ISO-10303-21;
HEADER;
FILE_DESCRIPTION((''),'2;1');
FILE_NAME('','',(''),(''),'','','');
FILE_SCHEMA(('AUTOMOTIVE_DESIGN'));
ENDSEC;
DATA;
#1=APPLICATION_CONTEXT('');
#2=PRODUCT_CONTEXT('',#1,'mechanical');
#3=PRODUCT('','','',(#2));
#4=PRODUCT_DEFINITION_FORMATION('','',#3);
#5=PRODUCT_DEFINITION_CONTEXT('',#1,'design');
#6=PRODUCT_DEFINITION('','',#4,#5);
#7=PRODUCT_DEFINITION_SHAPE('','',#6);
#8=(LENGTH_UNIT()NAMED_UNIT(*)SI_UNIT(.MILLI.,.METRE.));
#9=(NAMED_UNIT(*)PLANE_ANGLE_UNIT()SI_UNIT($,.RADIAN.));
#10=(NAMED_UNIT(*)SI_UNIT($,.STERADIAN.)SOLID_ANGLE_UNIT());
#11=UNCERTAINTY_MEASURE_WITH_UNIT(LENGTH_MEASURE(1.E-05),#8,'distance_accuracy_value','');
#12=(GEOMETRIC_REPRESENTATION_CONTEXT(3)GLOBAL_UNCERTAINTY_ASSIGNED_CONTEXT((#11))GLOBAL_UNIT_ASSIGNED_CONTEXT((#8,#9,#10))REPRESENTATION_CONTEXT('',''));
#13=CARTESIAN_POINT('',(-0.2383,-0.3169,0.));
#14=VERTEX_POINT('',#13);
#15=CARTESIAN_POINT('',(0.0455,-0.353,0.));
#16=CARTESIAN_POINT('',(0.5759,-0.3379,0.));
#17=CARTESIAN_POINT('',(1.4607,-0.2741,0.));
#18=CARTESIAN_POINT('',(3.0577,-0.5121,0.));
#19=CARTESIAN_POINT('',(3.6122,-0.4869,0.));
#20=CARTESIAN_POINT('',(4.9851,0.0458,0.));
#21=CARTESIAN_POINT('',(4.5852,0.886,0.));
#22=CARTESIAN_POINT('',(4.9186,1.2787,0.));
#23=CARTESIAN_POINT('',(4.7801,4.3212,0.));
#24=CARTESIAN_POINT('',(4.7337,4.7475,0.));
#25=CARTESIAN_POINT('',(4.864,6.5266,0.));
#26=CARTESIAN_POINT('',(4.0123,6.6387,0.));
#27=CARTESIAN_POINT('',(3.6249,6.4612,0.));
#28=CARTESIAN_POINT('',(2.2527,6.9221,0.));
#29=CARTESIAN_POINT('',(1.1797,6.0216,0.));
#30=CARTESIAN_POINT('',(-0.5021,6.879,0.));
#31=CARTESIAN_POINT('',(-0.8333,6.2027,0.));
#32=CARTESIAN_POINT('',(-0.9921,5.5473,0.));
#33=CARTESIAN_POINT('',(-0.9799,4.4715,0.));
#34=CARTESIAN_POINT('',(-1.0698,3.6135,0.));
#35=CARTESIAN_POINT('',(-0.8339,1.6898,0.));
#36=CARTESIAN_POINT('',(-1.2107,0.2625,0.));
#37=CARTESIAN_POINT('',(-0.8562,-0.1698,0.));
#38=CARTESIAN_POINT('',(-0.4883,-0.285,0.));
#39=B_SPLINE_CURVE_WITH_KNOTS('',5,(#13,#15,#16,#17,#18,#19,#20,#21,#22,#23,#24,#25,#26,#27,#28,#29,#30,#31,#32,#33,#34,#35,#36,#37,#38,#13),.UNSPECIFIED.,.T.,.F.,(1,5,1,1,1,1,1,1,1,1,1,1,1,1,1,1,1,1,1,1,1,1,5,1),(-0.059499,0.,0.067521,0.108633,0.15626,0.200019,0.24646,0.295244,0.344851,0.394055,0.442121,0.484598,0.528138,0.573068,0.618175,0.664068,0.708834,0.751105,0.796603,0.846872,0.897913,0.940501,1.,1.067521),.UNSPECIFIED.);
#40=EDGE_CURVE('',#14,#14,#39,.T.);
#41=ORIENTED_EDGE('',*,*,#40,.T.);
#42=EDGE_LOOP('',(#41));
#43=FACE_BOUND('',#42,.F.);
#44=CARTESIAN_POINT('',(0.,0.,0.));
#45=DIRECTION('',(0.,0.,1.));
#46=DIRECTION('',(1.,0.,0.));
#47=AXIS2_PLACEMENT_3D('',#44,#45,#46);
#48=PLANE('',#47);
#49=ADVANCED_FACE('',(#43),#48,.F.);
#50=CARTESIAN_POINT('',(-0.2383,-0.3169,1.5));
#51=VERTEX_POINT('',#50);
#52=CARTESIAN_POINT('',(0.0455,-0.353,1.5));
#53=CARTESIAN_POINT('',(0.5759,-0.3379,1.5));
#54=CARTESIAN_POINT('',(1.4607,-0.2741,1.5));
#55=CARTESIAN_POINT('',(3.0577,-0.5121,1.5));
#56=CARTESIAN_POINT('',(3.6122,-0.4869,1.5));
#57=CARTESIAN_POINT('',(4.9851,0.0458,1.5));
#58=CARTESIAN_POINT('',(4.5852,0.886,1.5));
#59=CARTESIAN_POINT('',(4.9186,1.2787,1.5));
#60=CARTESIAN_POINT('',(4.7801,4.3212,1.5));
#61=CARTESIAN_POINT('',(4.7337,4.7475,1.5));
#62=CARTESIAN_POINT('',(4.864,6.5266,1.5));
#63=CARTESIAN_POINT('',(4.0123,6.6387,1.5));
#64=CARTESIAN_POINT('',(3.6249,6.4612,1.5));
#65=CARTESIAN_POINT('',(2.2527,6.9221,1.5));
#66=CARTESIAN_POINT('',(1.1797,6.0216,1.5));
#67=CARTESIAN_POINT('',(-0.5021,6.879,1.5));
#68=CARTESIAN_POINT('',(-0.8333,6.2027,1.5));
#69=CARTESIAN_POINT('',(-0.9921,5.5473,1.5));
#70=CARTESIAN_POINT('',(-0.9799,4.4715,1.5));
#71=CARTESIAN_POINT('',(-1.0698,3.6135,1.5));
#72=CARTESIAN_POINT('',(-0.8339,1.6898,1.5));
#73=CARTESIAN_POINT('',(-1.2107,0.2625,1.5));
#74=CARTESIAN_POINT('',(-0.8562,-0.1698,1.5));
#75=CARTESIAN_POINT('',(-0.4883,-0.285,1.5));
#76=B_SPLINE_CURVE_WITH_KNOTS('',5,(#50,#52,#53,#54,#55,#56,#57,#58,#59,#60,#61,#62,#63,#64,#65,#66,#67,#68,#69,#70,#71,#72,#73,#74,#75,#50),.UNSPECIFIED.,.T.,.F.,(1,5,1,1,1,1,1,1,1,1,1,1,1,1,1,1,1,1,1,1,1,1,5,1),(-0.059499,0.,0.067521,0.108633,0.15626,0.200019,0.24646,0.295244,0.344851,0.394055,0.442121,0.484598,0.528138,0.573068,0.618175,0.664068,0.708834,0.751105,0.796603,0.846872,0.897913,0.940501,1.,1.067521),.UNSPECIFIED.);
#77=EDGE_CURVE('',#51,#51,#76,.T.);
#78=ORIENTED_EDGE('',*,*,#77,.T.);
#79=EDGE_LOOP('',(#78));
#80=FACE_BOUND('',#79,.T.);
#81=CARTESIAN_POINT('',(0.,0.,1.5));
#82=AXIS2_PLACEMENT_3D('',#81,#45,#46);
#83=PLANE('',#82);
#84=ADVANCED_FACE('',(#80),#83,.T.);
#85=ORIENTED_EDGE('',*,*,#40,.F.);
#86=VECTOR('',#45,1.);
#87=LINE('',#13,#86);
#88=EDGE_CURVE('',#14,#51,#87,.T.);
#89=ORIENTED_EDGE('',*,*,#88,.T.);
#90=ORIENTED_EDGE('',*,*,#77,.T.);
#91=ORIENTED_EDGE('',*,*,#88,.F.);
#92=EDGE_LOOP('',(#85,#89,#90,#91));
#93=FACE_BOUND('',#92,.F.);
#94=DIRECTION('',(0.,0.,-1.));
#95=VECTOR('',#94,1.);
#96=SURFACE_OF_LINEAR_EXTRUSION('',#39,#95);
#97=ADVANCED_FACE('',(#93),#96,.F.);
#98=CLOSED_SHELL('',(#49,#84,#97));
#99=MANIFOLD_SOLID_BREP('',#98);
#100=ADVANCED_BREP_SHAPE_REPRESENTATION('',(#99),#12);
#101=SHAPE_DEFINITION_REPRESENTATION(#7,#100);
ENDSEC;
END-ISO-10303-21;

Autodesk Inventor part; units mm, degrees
ref_plane "YZ Plane" through (0, 0, 0) normal (1, 0, 0) x (0, 1, 0)
ref_plane "XZ Plane" through (0, 0, 0) normal (0, 1, 0) x (-1, 0, 0)
ref_plane "XY Plane" through (0, 0, 0) normal (0, 0, 1) x (1, 0, 0)
ref_plane "РабПлоскость3" through (0, 0, 0) normal (0, 0, 1) x (1, 0, 0)
sketch "Эскиз4" plane through (0, 0, 0) normal (0, 0, 1) x (1, 0, 0)
  spline S0 degree 5 poles (-0.2383, -0.3169) (0.0455, -0.353) (0.5759, -0.3379) (1.4607, -0.2741) (3.0577, -0.5121) (3.6122, -0.4869) (4.9851, 0.0458) (4.5852, 0.886) (4.9186, 1.2787) (4.7801, 4.3212) (4.7337, 4.7475) (4.864, 6.5266) (4.0123, 6.6387) (3.6249, 6.4612) (2.2527, 6.9221) (1.1797, 6.0216) (-0.5021, 6.879) (-0.8333, 6.2027) (-0.9921, 5.5473) (-0.9799, 4.4715) (-1.0698, 3.6135) (-0.8339, 1.6898) (-1.2107, 0.2625) (-0.8562, -0.1698) (-0.4883, -0.285) (-0.2383, -0.3169) knots 0 0 0 0 0 0 0.067521 0.108633 0.15626 0.200019 0.24646 0.295244 0.344851 0.394055 0.442121 0.484598 0.528138 0.573068 0.618175 0.664068 0.708834 0.751105 0.796603 0.846872 0.897913 0.940501 1 1 1 1 1 1
  point P0 (0, 0)
  point P1 (3.033, -0.4579)
  point P2 (3.9261, -0.3169)
  point P3 (4.6217, 0.1719)
  point P4 (4.7345, 0.6514)
  point P5 (4.7721, 1.2812)
  point P6 (4.7909, 3.9509)
  point P7 (4.7627, 5.3985)
  point P8 (4.4995, 6.3856)
  point P9 (4.1047, 6.5642)
  point P10 (3.6535, 6.5736)
  point P11 (2.5912, 6.6488)
  point P12 (0.871, 6.4138)
  point P13 (-0.4733, 6.4984)
  point P14 (-0.7929, 6.1694)
  point P15 (-0.9339, 5.6147)
  point P16 (-0.9903, 4.7875)
  point P17 (-1.0091, 3.6877)
  point P18 (-0.9997, 1.4128)
  point P19 (-0.8681, 0)
extrude "Выдавливание4" add sketch "Эскиз4" along normal blind 1.5
properties part number "SOIC-08 board"
